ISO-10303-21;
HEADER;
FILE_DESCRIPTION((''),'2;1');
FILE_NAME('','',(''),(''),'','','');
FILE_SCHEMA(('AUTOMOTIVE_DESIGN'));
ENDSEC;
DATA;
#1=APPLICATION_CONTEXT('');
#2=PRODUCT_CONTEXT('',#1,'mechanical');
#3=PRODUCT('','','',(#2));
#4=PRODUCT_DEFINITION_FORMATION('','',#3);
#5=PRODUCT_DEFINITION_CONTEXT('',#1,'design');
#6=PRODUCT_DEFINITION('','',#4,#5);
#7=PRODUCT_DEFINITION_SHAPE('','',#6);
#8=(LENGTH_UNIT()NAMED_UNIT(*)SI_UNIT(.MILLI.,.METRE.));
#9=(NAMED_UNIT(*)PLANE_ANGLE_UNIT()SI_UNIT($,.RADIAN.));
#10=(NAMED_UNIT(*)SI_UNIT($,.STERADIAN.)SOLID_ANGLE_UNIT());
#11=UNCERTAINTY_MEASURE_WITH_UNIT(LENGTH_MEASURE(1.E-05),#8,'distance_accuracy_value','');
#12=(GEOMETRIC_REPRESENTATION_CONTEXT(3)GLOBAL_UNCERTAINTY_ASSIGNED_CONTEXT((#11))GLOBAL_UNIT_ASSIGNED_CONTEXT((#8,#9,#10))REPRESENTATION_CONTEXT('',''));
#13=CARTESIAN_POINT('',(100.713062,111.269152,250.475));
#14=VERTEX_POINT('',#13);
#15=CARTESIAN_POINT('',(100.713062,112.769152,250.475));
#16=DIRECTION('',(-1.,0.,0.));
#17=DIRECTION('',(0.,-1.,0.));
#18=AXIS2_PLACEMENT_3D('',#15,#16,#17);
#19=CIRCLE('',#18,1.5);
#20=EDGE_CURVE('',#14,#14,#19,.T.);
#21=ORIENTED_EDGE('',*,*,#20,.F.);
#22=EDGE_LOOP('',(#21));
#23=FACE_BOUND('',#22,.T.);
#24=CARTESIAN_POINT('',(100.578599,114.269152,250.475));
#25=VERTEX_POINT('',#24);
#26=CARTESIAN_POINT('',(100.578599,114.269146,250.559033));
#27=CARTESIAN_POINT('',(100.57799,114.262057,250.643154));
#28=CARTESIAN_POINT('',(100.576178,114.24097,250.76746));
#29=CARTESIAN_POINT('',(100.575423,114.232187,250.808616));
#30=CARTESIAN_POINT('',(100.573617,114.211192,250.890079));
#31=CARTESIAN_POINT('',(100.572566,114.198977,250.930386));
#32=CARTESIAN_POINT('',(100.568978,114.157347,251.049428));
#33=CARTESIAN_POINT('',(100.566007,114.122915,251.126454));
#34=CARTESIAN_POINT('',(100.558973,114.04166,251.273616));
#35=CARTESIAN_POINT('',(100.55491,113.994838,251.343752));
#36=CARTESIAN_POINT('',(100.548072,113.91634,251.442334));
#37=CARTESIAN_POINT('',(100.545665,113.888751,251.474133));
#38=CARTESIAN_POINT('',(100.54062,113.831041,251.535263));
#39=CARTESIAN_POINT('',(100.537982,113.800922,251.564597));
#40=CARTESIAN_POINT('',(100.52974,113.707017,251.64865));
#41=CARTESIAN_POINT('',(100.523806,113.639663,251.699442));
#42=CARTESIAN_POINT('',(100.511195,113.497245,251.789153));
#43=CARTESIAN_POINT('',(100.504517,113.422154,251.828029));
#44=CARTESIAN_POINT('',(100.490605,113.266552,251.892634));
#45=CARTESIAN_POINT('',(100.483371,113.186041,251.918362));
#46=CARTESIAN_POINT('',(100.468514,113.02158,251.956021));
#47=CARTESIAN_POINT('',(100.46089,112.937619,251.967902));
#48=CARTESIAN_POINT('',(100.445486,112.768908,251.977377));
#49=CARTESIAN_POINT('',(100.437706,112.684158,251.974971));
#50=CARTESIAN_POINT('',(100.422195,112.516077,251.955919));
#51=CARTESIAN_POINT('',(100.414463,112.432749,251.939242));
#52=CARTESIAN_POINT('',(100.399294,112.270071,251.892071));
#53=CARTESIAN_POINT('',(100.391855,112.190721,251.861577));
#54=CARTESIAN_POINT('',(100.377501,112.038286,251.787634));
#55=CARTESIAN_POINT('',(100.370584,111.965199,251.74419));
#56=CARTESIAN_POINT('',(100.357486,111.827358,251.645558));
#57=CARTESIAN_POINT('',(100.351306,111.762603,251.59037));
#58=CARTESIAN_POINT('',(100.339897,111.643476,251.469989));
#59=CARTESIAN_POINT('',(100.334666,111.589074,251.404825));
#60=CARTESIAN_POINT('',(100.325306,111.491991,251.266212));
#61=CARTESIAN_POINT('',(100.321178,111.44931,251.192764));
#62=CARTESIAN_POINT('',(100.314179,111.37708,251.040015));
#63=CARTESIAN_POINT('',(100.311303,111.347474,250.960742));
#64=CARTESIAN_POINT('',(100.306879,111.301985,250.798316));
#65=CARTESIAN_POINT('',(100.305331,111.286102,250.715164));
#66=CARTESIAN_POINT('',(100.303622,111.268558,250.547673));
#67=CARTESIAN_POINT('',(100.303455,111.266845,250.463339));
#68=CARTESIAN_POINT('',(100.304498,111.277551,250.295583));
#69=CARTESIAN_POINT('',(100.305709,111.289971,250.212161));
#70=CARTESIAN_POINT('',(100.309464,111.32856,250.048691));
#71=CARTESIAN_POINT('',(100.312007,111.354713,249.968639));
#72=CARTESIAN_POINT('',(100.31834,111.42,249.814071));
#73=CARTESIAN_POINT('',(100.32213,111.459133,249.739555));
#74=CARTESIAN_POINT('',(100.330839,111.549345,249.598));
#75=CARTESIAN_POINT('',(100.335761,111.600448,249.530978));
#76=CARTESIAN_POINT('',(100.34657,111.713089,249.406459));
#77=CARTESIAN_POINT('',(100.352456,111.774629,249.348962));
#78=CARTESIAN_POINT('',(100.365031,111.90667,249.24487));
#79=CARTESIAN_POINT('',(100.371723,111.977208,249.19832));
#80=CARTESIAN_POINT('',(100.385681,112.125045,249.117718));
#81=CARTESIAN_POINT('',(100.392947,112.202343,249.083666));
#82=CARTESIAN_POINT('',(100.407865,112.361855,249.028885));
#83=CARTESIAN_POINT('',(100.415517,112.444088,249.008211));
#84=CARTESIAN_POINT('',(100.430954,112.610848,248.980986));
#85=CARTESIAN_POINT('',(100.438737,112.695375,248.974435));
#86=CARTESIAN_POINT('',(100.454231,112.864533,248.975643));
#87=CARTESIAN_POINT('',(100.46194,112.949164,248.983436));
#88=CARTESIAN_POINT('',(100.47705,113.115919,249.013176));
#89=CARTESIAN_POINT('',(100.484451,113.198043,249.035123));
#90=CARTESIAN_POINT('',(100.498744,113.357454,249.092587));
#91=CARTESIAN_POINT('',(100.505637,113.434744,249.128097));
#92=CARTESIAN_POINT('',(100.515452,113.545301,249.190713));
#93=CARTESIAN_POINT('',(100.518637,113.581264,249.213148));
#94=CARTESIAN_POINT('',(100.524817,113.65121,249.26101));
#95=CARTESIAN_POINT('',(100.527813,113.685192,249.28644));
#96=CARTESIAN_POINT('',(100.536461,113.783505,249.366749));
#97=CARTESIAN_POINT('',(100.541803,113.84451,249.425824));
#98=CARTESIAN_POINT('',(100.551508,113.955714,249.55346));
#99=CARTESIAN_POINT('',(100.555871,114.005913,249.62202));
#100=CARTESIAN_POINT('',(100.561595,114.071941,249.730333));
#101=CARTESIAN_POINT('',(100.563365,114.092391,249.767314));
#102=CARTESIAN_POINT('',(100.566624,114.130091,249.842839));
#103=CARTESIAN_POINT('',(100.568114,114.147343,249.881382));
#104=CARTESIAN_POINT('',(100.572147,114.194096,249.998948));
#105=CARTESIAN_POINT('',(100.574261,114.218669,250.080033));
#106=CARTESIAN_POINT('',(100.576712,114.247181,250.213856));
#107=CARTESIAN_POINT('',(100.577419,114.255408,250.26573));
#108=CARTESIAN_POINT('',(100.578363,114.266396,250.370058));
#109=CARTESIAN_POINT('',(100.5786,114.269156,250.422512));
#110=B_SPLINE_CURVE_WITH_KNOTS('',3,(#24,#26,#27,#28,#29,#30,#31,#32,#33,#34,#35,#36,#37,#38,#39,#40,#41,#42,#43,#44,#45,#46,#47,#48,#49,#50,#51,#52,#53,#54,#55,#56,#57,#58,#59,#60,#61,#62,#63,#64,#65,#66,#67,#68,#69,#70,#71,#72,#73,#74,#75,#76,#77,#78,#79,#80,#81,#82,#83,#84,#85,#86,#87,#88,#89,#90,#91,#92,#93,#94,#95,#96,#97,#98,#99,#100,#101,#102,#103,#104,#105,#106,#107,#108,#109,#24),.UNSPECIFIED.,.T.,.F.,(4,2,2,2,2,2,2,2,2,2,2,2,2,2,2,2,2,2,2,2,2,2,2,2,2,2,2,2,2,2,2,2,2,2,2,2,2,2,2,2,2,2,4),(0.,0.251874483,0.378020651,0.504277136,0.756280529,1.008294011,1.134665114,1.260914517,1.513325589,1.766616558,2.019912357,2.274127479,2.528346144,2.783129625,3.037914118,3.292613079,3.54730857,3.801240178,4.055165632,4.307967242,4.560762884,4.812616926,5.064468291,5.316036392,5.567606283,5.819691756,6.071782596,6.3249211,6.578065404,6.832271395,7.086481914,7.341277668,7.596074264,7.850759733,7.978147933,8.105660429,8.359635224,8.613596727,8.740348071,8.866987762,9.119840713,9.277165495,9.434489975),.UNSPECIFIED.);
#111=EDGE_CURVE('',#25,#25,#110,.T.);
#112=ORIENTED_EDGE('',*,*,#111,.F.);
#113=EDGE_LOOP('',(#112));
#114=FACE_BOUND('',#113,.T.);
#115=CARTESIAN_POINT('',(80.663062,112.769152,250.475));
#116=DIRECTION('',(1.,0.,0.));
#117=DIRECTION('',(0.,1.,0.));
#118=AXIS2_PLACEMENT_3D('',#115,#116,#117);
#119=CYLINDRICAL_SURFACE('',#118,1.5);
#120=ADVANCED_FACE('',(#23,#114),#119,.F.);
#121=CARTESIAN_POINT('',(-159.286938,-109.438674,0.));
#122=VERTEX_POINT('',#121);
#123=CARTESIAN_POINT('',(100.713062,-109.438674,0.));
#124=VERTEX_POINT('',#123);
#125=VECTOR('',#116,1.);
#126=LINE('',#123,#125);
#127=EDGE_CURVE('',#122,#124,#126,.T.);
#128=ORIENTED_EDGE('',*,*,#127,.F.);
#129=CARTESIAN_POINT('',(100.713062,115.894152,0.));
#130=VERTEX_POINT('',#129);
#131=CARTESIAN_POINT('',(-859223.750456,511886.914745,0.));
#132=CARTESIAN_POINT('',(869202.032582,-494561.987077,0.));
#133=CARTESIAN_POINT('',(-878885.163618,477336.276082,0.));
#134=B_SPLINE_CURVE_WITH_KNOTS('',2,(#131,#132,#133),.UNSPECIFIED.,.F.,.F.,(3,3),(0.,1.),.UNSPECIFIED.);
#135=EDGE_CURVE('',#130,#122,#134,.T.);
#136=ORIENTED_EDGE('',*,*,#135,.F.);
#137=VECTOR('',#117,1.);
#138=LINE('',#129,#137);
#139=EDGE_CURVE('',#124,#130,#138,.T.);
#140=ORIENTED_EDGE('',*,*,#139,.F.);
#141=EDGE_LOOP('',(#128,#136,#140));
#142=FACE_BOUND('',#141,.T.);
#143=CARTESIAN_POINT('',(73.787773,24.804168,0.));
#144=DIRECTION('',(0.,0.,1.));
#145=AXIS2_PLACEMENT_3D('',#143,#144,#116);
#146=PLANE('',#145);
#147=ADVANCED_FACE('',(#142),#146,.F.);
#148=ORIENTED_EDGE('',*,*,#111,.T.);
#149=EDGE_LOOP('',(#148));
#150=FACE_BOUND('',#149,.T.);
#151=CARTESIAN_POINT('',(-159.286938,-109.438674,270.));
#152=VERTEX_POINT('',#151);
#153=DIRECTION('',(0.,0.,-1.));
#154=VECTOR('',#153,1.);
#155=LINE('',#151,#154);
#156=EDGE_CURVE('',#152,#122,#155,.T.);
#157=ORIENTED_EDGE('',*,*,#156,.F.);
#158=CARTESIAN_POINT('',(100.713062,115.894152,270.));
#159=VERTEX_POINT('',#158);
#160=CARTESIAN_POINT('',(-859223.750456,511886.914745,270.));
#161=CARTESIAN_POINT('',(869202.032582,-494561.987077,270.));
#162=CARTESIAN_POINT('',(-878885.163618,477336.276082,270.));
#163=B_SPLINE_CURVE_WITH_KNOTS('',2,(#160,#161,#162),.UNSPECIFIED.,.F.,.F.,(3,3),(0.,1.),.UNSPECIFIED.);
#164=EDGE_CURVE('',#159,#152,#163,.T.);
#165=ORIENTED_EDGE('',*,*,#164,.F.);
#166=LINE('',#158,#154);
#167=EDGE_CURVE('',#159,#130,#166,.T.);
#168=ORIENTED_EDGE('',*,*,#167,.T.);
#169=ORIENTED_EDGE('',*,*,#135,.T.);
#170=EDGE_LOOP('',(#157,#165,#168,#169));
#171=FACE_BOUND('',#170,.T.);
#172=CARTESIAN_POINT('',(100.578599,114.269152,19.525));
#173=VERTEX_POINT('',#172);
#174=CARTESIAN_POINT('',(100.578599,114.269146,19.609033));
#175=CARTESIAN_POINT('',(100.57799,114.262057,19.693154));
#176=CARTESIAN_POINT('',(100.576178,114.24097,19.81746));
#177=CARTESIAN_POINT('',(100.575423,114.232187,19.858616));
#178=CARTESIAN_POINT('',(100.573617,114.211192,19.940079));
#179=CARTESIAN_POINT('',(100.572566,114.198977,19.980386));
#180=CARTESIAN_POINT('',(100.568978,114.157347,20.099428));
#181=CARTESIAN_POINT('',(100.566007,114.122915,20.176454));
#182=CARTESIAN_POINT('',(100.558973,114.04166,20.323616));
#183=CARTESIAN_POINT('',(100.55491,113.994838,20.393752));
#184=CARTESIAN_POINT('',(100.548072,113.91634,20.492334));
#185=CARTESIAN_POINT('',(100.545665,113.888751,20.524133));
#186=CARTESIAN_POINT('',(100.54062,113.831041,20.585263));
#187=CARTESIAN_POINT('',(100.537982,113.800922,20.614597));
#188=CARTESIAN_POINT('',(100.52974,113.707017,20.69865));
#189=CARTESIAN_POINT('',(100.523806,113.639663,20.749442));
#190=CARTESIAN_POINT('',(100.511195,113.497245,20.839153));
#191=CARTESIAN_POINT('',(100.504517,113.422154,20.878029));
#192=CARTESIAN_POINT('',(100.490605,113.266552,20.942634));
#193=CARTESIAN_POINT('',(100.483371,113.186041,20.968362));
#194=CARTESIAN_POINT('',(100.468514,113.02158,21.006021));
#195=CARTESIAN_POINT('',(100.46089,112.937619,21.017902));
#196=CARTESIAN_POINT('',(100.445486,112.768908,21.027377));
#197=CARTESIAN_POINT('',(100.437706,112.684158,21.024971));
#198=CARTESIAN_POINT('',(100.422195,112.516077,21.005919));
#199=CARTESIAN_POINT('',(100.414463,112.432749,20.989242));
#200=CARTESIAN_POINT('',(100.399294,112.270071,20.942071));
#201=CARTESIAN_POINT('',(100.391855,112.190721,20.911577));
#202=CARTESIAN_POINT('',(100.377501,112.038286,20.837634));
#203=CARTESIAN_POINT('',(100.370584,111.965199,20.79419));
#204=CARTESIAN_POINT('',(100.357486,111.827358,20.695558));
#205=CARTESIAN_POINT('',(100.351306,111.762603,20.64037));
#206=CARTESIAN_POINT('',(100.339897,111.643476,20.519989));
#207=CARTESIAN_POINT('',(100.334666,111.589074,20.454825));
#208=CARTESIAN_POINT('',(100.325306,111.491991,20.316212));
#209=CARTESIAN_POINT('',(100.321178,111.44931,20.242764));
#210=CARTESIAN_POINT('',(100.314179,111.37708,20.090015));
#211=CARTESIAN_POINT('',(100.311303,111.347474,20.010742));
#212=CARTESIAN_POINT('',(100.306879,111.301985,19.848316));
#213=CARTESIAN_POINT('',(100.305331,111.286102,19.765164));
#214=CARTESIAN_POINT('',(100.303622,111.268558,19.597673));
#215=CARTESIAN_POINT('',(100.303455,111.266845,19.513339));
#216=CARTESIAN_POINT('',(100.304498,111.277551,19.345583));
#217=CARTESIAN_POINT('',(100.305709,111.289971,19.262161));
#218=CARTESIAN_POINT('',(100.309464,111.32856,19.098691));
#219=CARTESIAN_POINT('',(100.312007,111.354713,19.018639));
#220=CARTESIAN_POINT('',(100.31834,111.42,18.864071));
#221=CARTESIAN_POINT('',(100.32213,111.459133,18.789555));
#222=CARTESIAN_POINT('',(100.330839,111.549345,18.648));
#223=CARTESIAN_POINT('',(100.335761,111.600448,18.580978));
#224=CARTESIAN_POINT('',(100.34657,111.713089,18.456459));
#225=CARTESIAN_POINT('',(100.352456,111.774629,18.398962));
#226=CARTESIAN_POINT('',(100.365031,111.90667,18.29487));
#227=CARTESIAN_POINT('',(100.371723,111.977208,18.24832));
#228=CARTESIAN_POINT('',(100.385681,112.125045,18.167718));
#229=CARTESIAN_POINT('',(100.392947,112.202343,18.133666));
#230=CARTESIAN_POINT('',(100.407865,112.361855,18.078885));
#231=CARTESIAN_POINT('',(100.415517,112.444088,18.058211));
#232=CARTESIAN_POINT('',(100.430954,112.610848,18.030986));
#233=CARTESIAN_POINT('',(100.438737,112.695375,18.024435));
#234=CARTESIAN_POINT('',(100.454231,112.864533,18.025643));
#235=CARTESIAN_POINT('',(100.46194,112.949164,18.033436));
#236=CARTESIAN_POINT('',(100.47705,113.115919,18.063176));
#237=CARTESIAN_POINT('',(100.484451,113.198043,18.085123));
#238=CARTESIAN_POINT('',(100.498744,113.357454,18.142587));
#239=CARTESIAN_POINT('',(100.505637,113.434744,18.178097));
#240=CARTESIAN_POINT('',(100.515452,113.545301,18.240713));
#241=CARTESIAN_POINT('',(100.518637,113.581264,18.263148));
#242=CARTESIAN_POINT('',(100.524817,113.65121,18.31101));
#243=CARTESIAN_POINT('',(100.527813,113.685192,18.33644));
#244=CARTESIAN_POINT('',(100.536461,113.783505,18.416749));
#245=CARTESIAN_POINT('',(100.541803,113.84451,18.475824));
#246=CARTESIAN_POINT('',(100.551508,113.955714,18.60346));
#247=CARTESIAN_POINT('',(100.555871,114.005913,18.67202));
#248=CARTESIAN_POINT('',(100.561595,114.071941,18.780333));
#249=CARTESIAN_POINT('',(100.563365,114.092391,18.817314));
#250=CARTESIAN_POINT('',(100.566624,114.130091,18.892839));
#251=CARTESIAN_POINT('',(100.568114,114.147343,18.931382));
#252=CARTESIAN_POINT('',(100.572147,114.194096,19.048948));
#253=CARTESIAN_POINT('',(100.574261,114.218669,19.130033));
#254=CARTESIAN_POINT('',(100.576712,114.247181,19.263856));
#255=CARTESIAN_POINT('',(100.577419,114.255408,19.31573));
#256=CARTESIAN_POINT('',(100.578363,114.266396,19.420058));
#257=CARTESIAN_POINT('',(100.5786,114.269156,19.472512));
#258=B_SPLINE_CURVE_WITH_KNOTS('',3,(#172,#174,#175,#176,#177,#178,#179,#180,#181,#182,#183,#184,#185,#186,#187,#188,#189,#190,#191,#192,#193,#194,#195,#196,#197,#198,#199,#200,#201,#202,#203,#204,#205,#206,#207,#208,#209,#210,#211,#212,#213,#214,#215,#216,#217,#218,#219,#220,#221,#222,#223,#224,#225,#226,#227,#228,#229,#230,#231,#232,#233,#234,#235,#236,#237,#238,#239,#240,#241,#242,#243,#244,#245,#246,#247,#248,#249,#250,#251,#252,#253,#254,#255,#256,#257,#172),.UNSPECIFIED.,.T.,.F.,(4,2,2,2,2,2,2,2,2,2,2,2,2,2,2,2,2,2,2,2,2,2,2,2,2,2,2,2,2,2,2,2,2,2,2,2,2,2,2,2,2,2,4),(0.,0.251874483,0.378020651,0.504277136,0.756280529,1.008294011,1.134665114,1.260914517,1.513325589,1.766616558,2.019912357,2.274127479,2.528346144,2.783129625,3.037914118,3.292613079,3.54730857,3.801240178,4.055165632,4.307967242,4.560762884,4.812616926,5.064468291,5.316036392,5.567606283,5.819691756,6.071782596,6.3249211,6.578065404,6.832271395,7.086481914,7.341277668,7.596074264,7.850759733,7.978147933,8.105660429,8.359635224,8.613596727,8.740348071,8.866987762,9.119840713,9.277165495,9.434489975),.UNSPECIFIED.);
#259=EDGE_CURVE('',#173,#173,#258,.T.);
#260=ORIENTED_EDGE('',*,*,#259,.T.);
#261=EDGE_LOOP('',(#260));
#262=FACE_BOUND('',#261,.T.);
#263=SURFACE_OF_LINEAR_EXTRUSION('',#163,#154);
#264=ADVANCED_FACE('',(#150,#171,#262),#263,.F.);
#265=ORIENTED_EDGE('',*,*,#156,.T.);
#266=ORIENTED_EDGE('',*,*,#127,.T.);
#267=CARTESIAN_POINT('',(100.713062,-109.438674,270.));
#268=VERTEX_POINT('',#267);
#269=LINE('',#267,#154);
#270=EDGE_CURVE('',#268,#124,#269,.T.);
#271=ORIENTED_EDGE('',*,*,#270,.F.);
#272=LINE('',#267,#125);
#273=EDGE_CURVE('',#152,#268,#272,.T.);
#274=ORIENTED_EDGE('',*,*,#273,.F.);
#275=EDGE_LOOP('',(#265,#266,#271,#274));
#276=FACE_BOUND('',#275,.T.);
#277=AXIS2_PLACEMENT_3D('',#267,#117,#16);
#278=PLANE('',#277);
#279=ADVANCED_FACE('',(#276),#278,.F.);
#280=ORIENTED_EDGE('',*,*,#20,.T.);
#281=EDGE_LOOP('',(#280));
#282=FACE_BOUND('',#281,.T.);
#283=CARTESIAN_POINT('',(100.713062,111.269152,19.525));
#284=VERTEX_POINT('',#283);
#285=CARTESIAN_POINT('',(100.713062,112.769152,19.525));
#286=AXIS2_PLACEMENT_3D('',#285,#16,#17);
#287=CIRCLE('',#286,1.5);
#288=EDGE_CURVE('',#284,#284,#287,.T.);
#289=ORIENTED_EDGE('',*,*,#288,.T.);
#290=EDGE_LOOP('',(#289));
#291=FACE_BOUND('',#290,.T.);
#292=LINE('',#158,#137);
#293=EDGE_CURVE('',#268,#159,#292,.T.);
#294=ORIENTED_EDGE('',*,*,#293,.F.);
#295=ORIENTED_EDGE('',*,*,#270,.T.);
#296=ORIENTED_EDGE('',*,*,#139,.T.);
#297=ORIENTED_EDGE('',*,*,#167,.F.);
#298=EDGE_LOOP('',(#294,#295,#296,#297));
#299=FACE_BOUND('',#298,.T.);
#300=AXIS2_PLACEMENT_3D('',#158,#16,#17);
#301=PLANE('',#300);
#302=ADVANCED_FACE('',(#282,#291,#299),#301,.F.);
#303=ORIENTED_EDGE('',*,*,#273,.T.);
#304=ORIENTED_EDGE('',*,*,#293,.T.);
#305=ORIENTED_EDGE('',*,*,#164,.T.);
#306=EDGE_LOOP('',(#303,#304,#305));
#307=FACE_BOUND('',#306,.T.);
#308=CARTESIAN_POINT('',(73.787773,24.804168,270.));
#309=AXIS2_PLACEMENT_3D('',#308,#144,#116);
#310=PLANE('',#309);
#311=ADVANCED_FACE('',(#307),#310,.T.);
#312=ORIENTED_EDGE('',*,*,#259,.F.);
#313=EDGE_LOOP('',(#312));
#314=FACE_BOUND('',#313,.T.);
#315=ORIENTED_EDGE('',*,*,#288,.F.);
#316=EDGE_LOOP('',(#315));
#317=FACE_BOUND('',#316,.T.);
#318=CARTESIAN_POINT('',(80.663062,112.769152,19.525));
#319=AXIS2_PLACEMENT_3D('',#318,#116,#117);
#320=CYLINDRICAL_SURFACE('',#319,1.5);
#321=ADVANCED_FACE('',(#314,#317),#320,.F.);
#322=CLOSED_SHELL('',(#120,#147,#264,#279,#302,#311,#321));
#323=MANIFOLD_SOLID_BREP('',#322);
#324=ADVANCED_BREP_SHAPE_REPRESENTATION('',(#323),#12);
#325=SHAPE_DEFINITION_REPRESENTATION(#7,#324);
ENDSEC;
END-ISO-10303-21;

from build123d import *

# Parameters (mm, degrees)
SALIENTE_EXTRUIR1_DEPTH = 270


with BuildPart() as part:
    # Croquis1 → Saliente-Extruir1 (new body)
    with BuildSketch(Plane.XY):
        with BuildLine():
            Line((100.713061676, 115.894152269), (100.713061676, -109.438674176))
            Line((100.713061676, -109.438674176), (-159.286938324, -109.438674176))
            add(Edge.make_bspline(
                [(100.713061676, 115.894152269), (86.491229744, -62.657074826), (-159.286938324, -109.438674176)],
                knots=[0, 0, 0, 1, 1, 1], degree=2))
        make_face()
    extrude(amount=SALIENTE_EXTRUIR1_DEPTH)

    # Cortar-Extruir1: read off the stored shape, not the designer's step
    # Cortar-Extruir1: loft between two sections, ruled curve by curve
    cortar_extruir1_from = [
        Edge.make_three_point_arc((100.303649048, 114.269152269, 250.475), (100.303649048, 112.769152269, 251.975), (100.303649048, 111.269152269, 250.475)),
        Edge.make_three_point_arc((100.303649048, 111.269152269, 250.475), (100.303649048, 112.769152269, 248.975), (100.303649048, 114.269152269, 250.475)),
    ]
    cortar_extruir1_to = [
        Edge.make_three_point_arc((100.713061676, 114.269152269, 250.475), (100.713061676, 112.769152269, 251.975), (100.713061676, 111.269152269, 250.475)),
        Edge.make_three_point_arc((100.713061676, 111.269152269, 250.475), (100.713061676, 112.769152269, 248.975), (100.713061676, 114.269152269, 250.475)),
    ]
    cortar_extruir1 = Solid(Shell([*[Face.make_surface_from_curves(cortar_extruir1_from[k], cortar_extruir1_to[k]) for k in range(2)], Face(Wire(cortar_extruir1_from)), Face(Wire(cortar_extruir1_to))]))
    add(cortar_extruir1, mode=Mode.SUBTRACT)

    # Cortar-Extruir1 2: loft between two sections, ruled curve by curve
    cortar_extruir1_2_from = [
        Edge.make_three_point_arc((100.303649048, 114.269152269, 19.525), (100.303649048, 112.769152269, 21.025), (100.303649048, 111.269152269, 19.525)),
        Edge.make_three_point_arc((100.303649048, 111.269152269, 19.525), (100.303649048, 112.769152269, 18.025), (100.303649048, 114.269152269, 19.525)),
    ]
    cortar_extruir1_2_to = [
        Edge.make_three_point_arc((100.713061676, 114.269152269, 19.525), (100.713061676, 112.769152269, 21.025), (100.713061676, 111.269152269, 19.525)),
        Edge.make_three_point_arc((100.713061676, 111.269152269, 19.525), (100.713061676, 112.769152269, 18.025), (100.713061676, 114.269152269, 19.525)),
    ]
    cortar_extruir1_2 = Solid(Shell([*[Face.make_surface_from_curves(cortar_extruir1_2_from[k], cortar_extruir1_2_to[k]) for k in range(2)], Face(Wire(cortar_extruir1_2_from)), Face(Wire(cortar_extruir1_2_to))]))
    add(cortar_extruir1_2, mode=Mode.SUBTRACT)


solid = part.part
